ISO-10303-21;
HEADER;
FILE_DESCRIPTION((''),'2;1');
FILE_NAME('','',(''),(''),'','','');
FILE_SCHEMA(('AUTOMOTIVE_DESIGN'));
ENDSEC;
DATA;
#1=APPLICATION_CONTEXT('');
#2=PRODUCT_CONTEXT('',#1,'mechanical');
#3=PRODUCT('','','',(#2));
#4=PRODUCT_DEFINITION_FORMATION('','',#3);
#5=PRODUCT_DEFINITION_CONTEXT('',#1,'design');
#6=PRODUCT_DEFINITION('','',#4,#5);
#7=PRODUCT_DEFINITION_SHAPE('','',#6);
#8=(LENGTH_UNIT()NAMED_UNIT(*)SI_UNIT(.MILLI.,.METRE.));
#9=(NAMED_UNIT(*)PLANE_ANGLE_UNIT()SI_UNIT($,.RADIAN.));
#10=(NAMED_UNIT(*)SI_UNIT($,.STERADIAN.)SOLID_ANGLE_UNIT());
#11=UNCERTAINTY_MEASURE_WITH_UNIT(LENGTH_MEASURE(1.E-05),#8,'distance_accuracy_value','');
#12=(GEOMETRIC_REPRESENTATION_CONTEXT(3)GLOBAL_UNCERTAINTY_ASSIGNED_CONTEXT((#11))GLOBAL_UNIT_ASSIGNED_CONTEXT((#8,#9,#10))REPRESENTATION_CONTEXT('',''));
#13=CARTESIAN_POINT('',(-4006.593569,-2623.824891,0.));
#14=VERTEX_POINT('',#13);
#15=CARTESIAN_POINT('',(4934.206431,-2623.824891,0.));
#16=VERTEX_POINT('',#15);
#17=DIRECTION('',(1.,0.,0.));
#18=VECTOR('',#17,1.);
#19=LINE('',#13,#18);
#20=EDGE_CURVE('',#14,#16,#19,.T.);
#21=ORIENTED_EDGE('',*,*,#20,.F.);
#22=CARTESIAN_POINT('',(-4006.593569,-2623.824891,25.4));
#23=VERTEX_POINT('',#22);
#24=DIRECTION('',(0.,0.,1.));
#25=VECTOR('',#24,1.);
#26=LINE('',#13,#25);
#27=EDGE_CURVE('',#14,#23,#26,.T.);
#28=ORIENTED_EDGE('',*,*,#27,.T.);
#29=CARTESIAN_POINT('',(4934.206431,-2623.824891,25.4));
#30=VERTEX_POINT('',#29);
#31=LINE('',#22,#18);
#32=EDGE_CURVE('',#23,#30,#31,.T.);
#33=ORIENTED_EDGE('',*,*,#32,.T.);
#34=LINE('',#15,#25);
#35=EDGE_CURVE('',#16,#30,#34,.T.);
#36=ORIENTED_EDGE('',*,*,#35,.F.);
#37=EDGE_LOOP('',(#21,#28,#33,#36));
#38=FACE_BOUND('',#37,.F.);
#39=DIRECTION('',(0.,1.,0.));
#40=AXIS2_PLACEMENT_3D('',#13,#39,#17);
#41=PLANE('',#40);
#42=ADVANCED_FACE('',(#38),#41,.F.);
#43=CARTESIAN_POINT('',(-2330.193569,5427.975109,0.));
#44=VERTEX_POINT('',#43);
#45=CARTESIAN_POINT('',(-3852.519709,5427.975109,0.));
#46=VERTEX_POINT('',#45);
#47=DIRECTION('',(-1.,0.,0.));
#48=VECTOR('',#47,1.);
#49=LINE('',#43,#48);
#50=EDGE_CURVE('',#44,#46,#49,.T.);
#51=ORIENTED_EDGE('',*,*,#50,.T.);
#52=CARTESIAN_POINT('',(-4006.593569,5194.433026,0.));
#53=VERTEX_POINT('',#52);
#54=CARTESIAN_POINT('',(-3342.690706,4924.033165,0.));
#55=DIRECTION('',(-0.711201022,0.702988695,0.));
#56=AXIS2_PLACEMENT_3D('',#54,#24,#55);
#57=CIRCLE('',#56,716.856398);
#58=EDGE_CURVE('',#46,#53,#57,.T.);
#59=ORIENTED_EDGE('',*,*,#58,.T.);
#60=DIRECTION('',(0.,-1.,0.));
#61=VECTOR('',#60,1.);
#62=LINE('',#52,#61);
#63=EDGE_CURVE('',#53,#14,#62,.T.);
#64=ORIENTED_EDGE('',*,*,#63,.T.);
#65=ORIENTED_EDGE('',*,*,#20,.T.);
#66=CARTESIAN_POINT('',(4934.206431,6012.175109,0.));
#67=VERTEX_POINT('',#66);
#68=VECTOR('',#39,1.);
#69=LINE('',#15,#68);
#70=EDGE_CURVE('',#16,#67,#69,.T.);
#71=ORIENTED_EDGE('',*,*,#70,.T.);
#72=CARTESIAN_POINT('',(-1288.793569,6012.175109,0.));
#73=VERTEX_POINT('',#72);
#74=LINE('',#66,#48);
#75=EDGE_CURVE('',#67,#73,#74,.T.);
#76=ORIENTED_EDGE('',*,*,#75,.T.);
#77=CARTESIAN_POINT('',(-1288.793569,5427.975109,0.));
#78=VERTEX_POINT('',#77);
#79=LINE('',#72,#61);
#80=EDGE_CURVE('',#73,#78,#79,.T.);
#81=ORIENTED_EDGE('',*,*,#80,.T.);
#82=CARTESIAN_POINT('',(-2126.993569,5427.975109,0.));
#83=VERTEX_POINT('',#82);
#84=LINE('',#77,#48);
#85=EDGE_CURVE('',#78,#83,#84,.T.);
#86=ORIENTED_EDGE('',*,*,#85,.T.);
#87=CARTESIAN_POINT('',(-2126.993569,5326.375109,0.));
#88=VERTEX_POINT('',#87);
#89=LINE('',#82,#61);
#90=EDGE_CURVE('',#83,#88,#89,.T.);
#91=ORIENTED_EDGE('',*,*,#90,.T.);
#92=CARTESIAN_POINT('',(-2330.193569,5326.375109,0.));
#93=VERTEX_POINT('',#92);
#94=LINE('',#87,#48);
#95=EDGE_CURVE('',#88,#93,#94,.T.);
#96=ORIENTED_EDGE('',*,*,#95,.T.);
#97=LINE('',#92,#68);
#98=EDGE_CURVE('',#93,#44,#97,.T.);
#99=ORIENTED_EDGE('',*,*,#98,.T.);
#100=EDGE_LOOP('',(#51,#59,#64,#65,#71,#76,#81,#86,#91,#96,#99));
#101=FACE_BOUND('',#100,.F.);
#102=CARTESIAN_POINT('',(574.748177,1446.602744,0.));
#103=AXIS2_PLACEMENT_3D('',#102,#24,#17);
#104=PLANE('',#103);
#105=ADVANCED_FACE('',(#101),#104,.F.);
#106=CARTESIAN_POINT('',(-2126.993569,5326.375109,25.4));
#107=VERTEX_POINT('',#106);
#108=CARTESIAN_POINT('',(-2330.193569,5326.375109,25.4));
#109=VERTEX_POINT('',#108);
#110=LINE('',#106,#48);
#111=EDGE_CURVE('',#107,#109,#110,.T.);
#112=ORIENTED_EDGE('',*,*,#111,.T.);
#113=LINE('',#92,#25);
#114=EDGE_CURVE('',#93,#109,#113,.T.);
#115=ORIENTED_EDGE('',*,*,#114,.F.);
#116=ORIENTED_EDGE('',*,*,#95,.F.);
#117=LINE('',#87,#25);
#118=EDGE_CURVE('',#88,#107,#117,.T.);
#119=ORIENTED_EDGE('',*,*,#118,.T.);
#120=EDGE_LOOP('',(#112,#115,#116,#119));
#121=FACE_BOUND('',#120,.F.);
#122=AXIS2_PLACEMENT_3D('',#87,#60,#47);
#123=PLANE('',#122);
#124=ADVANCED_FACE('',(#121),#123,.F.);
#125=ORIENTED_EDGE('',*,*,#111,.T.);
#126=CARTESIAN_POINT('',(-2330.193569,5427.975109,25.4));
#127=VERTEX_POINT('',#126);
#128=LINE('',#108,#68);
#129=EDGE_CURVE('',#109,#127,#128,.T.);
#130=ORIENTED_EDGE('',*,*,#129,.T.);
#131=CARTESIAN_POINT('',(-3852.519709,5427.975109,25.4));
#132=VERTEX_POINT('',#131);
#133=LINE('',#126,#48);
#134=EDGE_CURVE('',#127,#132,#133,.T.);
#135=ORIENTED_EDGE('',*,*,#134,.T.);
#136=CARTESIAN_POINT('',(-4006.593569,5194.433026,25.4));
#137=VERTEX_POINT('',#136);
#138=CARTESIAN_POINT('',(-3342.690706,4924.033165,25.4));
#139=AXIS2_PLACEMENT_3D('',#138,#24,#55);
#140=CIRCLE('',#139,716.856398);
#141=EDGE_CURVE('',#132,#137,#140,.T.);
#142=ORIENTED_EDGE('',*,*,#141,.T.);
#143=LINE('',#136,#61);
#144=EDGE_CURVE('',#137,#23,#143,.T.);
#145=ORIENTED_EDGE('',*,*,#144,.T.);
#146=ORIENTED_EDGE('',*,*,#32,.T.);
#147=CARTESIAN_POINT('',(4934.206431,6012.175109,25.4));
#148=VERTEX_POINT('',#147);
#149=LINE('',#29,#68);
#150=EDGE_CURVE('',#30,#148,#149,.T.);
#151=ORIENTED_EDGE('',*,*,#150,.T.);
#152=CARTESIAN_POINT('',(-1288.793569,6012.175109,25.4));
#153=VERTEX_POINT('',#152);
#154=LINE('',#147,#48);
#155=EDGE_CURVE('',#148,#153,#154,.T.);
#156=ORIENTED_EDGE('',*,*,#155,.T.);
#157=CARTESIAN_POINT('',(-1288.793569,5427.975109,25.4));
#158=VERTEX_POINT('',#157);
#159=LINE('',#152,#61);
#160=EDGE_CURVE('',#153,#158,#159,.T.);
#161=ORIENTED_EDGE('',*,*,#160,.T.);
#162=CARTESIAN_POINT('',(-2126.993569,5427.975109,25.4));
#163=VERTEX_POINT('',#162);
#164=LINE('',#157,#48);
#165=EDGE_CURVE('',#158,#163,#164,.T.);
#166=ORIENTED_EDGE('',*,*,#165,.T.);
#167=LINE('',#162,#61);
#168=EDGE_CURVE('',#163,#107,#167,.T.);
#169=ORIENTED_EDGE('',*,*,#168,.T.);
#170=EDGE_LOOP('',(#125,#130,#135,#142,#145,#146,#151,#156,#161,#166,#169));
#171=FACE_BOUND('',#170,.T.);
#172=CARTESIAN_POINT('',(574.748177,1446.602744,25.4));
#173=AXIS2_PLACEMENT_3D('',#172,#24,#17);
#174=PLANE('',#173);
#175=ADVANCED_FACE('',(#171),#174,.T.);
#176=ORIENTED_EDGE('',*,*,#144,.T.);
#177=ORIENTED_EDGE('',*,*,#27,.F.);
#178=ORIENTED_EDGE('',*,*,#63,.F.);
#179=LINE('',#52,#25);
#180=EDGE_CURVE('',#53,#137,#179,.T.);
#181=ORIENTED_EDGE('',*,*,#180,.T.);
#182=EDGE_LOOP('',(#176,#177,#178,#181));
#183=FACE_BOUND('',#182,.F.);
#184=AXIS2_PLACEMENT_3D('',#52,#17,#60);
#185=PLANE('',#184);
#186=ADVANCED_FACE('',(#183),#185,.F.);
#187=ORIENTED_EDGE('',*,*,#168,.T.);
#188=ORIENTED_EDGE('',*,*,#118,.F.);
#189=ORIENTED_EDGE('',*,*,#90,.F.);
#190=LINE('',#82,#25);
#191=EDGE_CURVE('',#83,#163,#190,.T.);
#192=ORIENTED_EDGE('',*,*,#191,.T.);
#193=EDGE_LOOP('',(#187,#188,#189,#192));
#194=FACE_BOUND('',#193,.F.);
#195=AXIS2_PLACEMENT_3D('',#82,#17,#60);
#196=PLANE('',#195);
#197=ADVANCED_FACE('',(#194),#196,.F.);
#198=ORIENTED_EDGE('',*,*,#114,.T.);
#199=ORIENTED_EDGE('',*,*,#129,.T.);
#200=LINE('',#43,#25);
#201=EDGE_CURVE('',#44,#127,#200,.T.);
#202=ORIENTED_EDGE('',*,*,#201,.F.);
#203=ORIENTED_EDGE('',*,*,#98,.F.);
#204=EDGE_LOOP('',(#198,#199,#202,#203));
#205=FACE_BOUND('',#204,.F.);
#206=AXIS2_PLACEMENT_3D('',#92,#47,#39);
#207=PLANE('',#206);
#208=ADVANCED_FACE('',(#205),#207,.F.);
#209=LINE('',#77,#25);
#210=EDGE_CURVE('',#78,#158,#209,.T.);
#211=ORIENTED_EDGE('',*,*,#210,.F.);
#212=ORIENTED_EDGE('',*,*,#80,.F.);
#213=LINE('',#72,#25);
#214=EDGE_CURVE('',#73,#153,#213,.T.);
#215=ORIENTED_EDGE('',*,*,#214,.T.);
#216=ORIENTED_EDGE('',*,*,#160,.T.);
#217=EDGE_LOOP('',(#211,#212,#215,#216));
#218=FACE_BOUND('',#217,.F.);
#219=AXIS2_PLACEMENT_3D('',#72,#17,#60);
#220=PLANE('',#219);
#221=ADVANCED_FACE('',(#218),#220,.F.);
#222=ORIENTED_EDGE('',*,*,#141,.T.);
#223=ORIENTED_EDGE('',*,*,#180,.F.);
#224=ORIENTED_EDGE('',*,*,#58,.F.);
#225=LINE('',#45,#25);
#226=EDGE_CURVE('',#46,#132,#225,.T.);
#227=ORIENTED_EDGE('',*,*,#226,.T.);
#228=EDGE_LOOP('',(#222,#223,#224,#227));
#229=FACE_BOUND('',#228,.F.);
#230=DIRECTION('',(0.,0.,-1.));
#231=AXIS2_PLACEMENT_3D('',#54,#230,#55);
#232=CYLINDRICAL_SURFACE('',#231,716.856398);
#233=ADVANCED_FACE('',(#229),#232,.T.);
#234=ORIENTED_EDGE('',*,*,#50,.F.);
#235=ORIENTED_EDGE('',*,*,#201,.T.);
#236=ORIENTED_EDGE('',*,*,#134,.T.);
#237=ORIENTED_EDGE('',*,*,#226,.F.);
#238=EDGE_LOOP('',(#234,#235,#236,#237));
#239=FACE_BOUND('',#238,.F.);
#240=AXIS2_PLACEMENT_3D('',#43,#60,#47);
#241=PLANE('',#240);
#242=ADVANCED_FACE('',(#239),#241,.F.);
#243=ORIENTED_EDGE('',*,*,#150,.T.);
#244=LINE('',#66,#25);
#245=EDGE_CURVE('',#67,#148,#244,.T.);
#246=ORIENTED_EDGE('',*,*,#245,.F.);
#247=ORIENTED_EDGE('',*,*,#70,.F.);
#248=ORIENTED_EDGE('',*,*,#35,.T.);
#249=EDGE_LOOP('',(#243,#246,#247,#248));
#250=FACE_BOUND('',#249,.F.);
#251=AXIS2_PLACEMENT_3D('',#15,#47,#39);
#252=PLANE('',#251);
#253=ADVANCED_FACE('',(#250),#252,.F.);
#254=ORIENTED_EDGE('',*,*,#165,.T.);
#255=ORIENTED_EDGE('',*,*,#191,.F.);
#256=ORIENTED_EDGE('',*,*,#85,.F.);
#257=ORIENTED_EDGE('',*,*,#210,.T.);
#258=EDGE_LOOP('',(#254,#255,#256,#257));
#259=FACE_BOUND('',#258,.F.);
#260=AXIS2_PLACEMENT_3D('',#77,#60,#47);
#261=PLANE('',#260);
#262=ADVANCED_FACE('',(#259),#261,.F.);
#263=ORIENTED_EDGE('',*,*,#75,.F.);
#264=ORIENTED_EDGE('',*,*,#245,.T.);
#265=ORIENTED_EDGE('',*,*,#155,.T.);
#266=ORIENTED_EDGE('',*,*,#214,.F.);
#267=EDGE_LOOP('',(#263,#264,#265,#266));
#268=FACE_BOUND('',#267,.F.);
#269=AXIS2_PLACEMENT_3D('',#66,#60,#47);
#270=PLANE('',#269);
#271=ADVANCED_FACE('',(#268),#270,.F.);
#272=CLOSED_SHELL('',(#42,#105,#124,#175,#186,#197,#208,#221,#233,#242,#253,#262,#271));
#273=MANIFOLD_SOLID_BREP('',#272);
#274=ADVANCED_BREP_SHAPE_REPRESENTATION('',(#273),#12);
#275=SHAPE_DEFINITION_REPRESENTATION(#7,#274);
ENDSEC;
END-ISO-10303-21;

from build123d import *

# Parameters (mm, degrees)
F0_R     = 685.2304837253
F2_DEPTH = 25.4


# Not quite as in the source:
# - the program builds the solid bodies; features that only make, move or delete a surface that nothing else refers to are left out


with BuildPart() as f2:
    # F0 (on Top) → F2 (new body)
    with BuildSketch(Plane.XY):
        with BuildLine():
            Line((4934.2064314485, -2623.8248911343), (4934.2064314485, 6012.1751088657))
            Line((4934.2064314485, 6012.1751088657), (-1288.7935685515, 6012.1751088657))
            Line((-1288.7935685515, 6012.1751088657), (-1288.7935685515, 5427.9751088657))
            Line((-1288.7935685515, 5427.9751088657), (-2126.9935685515, 5427.9751088657))
            Line((-2126.9935685515, 5427.9751088657), (-2126.9935685515, 5326.3751088657))
            Line((-2126.9935685515, 5326.3751088657), (-2330.1935685515, 5326.3751088657))
            Line((-2330.1935685515, 5326.3751088657), (-2330.1935685515, 5427.9751088657))
            Line((-2330.1935685515, 5427.9751088657), (-2832.8617031592, 5427.9751088657))
            ThreePointArc((-2832.8617031592, 5427.9751088657), (-2679.6080274317, 5196.4381140006), (-2625.8343083567, 4924.033164978))
            ThreePointArc((-2625.8343083567, 4924.033164978), (-3204.9226388633, 4220.5397003228), (-4006.5935685515, 4653.6333043329))
            Line((-4006.5935685515, 4653.6333043329), (-4006.5935685515, -2623.8248911343))
            Line((-4006.5935685515, -2623.8248911343), (547.2349236927, -2623.8248911343))
            ThreePointArc((547.2349236927, -2623.8248911343), (993.2484493325, -1608.5916420747), (1868.1852008655, -2289.8495197296))
            ThreePointArc((1868.1852008655, -2289.8495197296), (1846.7485049438, -2462.0916976859), (1783.7463308849, -2623.8248911343))
            Line((1783.7463308849, -2623.8248911343), (2002.3317513014, -2623.8248911343))
            ThreePointArc((2002.3317513014, -2623.8248911343), (2539.4671679111, -1645.2150017176), (3399.7739963066, -2356.5967082977))
            ThreePointArc((3399.7739963066, -2356.5967082977), (3386.8840068426, -2492.631840649), (3348.6728492235, -2623.8248911343))
            Line((3348.6728492235, -2623.8248911343), (4934.2064314486, -2623.8248911343))
        make_face()
        with Locations((4180.0508499146, 5218.0252075195)):
            Circle(F0_R, mode=Mode.SUBTRACT)
        with BuildLine():
            ThreePointArc((-2625.8343083567, 4924.033164978), (-2679.6080274317, 5196.4381140006), (-2832.8617031592, 5427.9751088657))
            Line((-2832.8617031592, 5427.9751088657), (-3852.5197093468, 5427.9751088657))
            ThreePointArc((-3852.5197093468, 5427.9751088657), (-3941.061075774, 5318.7938470176), (-4006.5935685515, 5194.4330256231))
            Line((-4006.5935685515, 5194.4330256231), (-4006.5935685515, 4653.6333043329))
            ThreePointArc((-4006.5935685515, 4653.6333043329), (-3204.9226388633, 4220.5397003228), (-2625.8343083567, 4924.033164978))
        make_face()
        with Locations((4180.0508499146, 5218.0252075195)):
            Circle(F0_R)
        with BuildLine():
            Line((2002.3317513014, -2623.8248911343), (3348.6728492235, -2623.8248911343))
            ThreePointArc((3348.6728492235, -2623.8248911343), (3386.8840068426, -2492.631840649), (3399.7739963066, -2356.5967082977))
            ThreePointArc((3399.7739963066, -2356.5967082977), (2539.4671679111, -1645.2150017176), (2002.3317513014, -2623.8248911343))
        make_face()
        with BuildLine():
            Line((547.2349236927, -2623.8248911343), (1783.7463308849, -2623.8248911343))
            ThreePointArc((1783.7463308849, -2623.8248911343), (1846.7485049438, -2462.0916976859), (1868.1852008655, -2289.8495197296))
            ThreePointArc((1868.1852008655, -2289.8495197296), (993.2484493325, -1608.5916420747), (547.2349236927, -2623.8248911343))
        make_face()
    extrude(amount=F2_DEPTH)


solid = f2.part
